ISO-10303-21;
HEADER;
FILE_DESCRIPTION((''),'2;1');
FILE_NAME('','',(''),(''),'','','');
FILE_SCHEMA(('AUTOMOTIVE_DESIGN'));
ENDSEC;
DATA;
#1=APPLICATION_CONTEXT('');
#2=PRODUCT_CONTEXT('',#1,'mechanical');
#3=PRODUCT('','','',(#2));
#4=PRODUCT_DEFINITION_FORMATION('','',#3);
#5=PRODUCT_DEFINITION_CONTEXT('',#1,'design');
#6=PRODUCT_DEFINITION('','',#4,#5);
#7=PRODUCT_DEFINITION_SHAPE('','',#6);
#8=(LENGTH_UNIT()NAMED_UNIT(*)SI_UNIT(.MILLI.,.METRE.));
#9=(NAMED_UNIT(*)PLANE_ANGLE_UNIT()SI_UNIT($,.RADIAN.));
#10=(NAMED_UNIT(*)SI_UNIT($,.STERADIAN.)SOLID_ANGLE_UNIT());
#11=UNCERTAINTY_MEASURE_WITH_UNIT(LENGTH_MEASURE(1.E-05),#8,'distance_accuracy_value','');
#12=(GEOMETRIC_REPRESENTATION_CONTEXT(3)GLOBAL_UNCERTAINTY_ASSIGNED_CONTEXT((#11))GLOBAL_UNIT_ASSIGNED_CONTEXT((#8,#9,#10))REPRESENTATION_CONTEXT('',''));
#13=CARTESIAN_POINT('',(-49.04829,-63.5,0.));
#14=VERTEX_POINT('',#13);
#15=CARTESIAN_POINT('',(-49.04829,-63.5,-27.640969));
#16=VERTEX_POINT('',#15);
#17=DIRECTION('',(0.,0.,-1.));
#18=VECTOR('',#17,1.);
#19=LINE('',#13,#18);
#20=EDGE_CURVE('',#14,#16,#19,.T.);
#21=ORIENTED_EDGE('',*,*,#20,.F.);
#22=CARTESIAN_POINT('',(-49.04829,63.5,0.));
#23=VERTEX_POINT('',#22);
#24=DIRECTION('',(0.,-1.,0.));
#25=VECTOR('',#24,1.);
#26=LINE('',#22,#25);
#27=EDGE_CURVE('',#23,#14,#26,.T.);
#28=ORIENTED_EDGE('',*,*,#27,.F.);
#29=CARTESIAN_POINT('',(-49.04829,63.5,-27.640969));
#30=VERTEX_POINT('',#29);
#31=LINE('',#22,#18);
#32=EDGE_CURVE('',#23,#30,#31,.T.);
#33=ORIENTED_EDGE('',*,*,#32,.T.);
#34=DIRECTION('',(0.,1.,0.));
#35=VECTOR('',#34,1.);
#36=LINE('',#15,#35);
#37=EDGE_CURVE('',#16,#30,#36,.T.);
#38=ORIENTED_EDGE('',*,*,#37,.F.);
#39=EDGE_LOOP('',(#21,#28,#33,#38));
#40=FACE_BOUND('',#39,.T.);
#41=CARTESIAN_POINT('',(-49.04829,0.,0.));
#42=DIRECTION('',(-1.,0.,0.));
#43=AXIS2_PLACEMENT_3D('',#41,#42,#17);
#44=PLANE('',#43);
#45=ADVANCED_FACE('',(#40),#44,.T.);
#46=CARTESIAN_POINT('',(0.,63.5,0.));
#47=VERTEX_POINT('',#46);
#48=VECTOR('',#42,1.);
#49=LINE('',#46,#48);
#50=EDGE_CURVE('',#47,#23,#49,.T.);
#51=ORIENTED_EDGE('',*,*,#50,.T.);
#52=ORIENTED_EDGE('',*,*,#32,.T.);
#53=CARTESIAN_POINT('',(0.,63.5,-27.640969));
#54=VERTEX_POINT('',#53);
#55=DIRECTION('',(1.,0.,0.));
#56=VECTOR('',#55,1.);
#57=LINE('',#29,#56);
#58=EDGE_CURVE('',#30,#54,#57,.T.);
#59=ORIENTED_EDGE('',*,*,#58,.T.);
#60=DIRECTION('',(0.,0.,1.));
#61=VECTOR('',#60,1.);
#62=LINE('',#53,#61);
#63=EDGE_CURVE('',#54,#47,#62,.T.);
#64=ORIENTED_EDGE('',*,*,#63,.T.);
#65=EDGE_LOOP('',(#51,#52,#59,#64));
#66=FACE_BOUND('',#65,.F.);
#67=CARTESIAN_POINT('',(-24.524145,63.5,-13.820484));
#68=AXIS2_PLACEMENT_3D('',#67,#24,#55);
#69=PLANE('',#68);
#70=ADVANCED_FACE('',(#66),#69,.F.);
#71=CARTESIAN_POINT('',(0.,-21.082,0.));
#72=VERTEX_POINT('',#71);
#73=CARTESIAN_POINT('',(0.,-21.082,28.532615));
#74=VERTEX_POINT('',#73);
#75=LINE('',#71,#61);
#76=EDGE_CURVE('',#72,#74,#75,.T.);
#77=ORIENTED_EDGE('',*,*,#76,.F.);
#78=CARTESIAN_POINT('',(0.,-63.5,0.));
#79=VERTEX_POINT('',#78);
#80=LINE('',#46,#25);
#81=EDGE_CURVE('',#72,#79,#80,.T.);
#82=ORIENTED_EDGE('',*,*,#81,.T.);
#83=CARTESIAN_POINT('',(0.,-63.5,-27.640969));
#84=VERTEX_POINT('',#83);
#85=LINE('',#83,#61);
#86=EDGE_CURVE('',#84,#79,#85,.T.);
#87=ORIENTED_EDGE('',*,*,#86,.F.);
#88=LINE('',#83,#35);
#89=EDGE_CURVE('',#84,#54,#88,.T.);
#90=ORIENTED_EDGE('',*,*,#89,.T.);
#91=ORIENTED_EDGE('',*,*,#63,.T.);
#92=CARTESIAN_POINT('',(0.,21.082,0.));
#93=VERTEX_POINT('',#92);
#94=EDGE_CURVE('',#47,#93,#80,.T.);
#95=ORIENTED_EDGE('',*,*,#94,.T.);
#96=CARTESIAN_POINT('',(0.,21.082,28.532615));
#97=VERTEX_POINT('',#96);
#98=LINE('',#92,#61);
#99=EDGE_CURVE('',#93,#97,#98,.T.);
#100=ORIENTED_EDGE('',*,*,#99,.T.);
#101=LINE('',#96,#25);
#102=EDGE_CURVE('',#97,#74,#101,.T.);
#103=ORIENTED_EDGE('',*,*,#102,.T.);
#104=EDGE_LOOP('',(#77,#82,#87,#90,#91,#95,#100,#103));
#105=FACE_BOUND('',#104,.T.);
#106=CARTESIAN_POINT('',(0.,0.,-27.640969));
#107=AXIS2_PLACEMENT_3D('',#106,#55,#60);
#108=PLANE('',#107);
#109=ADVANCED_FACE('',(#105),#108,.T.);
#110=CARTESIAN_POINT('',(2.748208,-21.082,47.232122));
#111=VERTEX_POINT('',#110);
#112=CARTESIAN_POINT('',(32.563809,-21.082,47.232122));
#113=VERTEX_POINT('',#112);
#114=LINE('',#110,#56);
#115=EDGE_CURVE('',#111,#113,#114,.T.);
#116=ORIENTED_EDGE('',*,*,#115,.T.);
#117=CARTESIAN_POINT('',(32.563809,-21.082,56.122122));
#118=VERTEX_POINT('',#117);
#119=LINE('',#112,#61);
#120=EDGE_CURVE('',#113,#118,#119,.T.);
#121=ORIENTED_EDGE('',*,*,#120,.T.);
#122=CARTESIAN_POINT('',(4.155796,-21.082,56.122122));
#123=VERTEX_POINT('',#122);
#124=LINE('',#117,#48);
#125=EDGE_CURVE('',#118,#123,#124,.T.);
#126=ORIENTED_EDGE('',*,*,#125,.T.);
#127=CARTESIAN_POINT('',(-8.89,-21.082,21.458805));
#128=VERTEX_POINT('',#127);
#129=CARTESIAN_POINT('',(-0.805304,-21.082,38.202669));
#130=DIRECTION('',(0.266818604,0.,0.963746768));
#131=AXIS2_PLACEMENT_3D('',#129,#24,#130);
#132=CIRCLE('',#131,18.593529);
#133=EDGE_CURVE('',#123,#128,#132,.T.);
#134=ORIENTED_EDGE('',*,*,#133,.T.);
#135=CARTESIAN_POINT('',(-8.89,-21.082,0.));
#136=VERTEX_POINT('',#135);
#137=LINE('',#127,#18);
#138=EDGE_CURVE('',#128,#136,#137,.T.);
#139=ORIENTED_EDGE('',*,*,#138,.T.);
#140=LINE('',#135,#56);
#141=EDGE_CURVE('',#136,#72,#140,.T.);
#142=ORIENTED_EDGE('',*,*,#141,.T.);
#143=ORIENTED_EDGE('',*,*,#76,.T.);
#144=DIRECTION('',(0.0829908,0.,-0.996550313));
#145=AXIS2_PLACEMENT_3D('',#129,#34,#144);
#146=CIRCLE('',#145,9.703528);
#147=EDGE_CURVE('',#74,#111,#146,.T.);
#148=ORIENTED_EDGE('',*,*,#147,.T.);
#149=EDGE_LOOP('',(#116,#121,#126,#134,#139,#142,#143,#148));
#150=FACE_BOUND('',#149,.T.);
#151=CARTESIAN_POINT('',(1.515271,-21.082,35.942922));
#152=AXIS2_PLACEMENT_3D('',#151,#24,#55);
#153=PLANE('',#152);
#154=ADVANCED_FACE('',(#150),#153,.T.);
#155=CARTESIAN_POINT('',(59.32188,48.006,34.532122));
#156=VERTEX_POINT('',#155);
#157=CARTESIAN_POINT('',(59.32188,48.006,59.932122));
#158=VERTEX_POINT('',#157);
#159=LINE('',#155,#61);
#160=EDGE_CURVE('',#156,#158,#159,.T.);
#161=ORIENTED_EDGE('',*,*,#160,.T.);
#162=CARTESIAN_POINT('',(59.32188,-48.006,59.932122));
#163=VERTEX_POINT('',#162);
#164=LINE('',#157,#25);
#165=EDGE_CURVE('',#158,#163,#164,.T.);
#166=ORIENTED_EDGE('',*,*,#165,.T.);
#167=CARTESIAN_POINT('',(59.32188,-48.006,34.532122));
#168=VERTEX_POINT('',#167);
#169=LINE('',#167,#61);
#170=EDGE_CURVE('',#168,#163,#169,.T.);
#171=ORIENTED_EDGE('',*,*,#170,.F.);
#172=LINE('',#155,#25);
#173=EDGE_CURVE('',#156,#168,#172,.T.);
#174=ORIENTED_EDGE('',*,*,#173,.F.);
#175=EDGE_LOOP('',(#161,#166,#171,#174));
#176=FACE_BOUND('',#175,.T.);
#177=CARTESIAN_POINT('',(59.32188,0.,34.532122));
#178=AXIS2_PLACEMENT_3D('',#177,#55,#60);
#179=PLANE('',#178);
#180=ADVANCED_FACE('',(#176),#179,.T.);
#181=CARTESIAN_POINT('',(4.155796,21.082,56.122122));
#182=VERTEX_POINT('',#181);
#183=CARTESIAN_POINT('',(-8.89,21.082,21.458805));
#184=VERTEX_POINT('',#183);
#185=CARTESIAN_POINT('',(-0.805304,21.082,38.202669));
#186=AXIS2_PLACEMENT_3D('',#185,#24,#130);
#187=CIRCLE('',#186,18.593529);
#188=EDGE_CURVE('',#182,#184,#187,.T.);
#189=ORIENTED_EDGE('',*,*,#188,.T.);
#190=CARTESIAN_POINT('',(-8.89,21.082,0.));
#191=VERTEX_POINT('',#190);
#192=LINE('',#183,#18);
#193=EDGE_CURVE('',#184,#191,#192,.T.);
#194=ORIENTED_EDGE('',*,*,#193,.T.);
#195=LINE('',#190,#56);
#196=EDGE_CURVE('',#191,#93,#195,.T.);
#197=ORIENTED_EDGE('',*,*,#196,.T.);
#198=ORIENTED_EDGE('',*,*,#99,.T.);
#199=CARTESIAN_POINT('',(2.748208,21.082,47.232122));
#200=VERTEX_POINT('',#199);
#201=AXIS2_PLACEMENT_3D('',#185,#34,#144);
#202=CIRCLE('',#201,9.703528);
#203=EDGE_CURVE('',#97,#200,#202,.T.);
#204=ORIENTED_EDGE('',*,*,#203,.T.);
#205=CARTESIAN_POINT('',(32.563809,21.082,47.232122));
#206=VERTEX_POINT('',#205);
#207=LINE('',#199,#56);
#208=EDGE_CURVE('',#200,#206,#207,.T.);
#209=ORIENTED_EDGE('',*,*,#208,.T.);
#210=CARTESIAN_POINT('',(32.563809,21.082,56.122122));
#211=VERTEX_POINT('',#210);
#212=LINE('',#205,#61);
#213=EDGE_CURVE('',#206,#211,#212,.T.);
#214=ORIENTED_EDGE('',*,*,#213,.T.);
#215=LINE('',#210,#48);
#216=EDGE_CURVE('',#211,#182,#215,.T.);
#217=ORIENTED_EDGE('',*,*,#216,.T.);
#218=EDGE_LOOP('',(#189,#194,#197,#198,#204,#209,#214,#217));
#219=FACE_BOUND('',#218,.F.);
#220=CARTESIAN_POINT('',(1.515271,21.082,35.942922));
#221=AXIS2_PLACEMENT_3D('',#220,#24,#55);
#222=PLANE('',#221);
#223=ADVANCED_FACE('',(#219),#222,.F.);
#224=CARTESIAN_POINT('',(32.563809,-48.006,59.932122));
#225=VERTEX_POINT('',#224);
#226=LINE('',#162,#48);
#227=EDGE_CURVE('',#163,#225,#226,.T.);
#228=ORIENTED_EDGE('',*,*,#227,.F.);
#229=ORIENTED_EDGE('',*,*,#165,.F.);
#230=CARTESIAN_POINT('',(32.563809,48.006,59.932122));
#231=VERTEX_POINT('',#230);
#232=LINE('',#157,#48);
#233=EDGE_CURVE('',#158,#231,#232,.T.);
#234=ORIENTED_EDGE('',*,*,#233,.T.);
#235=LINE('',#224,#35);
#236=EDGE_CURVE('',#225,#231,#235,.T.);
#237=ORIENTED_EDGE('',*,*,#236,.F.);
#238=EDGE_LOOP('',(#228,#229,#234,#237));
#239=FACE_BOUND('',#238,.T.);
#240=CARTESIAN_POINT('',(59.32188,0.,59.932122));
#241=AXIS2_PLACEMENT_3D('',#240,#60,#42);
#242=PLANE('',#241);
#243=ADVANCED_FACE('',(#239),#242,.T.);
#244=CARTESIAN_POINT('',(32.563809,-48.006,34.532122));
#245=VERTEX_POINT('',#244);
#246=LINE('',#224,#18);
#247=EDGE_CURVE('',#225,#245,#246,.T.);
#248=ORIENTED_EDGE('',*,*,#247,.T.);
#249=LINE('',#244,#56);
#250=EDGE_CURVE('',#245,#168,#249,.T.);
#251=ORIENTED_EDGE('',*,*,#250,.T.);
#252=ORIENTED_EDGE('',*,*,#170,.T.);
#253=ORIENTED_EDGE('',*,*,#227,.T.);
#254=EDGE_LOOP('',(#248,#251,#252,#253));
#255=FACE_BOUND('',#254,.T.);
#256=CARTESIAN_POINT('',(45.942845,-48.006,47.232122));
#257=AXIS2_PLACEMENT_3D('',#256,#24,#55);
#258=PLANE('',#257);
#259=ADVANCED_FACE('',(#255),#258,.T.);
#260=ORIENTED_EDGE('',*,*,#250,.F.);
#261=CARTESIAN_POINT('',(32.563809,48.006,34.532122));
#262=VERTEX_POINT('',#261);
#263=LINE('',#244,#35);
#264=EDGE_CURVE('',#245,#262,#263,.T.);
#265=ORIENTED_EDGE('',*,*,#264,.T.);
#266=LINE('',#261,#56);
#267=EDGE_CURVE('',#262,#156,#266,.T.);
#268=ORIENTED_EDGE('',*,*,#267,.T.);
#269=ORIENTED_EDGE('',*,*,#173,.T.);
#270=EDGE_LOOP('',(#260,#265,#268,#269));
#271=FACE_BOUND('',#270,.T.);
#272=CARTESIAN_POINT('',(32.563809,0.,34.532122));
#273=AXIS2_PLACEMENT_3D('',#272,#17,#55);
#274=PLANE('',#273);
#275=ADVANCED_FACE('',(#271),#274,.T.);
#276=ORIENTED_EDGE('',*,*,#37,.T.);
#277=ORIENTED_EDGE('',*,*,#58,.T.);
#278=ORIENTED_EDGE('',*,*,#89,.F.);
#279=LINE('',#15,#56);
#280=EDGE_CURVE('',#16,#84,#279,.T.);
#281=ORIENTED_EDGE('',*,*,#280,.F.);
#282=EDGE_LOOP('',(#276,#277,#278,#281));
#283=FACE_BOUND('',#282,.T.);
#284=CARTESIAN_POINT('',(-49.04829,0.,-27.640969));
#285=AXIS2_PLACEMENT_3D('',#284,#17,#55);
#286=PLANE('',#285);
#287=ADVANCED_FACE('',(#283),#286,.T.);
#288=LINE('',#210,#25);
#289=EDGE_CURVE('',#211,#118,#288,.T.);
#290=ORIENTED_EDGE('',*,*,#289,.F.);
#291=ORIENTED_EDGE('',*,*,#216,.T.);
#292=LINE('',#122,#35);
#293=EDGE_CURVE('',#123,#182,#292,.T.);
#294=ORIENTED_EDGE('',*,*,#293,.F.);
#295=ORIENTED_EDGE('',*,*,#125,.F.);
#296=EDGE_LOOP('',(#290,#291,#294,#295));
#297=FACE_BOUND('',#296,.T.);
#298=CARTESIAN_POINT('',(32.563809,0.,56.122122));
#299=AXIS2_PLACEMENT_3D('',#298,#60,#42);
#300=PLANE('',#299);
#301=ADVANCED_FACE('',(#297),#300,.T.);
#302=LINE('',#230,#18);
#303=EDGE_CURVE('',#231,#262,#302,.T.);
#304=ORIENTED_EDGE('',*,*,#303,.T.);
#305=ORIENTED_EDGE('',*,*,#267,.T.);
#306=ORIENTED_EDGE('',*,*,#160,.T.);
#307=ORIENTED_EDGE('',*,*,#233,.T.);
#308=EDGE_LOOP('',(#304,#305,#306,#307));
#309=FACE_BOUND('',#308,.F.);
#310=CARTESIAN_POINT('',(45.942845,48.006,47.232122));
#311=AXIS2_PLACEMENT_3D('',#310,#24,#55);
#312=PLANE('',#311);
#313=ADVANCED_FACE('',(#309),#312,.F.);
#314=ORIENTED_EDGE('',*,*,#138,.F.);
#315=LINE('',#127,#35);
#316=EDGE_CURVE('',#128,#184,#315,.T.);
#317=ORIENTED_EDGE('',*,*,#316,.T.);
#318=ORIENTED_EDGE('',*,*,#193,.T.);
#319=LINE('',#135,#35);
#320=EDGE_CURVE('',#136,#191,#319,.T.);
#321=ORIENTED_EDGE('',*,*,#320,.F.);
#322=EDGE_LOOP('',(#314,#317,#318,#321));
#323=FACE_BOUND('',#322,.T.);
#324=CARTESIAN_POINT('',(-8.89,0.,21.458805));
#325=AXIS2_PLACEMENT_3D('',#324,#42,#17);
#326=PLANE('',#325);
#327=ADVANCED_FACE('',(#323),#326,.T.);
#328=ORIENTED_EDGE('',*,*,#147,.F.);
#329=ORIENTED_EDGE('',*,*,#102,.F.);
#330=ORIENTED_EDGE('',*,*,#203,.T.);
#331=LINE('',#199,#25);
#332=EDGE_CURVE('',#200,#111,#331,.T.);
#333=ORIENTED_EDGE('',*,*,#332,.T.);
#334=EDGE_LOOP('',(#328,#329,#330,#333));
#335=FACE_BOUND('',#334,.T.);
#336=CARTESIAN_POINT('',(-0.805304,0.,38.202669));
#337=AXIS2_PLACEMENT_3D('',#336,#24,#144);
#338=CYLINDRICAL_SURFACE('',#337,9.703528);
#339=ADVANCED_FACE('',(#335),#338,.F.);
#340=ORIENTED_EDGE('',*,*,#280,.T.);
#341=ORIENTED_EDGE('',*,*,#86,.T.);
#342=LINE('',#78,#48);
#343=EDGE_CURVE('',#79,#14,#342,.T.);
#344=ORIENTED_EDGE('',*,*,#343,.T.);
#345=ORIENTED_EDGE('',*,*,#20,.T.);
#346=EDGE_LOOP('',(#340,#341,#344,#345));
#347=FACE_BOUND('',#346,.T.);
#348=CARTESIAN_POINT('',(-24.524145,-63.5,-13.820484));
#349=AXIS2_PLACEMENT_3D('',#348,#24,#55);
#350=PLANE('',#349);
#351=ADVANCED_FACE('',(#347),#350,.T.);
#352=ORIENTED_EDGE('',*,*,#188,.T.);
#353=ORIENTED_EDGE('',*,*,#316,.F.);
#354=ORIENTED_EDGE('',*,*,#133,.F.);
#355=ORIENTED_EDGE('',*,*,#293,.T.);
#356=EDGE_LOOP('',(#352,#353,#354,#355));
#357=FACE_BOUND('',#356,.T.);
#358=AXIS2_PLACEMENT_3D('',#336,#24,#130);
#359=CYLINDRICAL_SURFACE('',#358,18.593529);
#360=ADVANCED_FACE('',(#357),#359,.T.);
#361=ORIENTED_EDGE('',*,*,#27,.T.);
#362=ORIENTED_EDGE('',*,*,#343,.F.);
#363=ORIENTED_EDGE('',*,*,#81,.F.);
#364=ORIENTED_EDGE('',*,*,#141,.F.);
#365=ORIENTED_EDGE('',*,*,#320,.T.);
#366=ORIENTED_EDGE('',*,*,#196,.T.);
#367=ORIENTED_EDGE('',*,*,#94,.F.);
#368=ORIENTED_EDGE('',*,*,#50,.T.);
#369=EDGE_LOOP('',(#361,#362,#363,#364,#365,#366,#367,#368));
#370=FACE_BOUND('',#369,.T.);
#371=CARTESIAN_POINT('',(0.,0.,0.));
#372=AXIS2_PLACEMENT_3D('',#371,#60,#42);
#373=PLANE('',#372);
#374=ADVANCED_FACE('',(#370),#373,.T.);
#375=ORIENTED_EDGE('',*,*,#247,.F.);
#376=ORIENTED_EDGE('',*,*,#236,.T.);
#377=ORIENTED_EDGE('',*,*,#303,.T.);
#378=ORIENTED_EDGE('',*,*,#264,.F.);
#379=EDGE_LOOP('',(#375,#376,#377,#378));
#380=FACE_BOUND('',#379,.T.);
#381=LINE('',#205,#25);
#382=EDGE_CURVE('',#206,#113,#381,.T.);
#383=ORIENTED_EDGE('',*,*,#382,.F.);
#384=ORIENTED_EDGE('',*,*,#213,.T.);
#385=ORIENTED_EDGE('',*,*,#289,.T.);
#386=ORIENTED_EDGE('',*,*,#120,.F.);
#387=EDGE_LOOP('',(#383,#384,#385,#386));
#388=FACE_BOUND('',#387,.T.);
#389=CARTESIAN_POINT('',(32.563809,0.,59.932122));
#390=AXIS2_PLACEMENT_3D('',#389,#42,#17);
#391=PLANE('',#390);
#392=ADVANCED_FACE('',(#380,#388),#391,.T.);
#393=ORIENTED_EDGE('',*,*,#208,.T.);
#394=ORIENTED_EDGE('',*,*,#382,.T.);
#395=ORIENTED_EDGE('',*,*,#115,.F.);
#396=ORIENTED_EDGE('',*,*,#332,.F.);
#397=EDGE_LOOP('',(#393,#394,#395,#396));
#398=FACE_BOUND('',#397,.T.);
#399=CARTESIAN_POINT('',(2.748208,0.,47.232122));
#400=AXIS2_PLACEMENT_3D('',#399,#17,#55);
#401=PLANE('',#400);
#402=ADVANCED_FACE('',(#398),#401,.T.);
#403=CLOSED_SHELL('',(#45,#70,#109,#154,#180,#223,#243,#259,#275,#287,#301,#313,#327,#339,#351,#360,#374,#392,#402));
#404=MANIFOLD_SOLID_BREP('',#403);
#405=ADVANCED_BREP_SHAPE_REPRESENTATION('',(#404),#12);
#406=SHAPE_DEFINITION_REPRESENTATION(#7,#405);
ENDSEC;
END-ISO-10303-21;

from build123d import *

# Parameters (mm, degrees)
F1_DEPTH = 63.5
F2_DEPTH = 21.082
F3_DEPTH = 48.006


# Not quite as in the source:
# - a feature of the source that left no trace in its solid (it failed there, or was rolled back) is left out


with BuildPart() as f1:
    # F0 (on Front) → F1 (new body, symmetric)
    with BuildSketch(Plane.XZ):
        Polygon((0, -27.6409685612), (0, 0), (-8.890000172, 0), (-49.0482896566, 0), (-49.0482896566, -27.6409685612), align=None)
    extrude(amount=F1_DEPTH, both=True)

    # F0 (on Front) → F2 (join, symmetric)
    with BuildSketch(Plane.XZ):
        with BuildLine():
            Line((-8.890000172, 0), (0, 0))
            Line((0, 0), (0, 28.5326149315))
            ThreePointArc((0, 28.5326149315), (-10.4057051367, 39.6136101279), (2.7482079064, 47.2321221605))
            Line((2.7482079064, 47.2321221605), (32.5638093054, 47.2321221605))
            Line((32.5638093054, 47.2321221605), (32.5638093054, 56.1221223325))
            Line((32.5638093054, 56.1221223325), (4.1557957579, 56.1221223325))
            ThreePointArc((4.1557957579, 56.1221223325), (-18.2071887125, 44.7519974591), (-8.890000172, 21.4588050682))
            Line((-8.890000172, 21.4588050682), (-8.890000172, 0))
        make_face()
    extrude(amount=F2_DEPTH, both=True)

    # F0 (on Front) → F3 (join, symmetric)
    with BuildSketch(Plane.XZ):
        Polygon((32.5638093054, 56.1221223325), (32.5638093054, 47.2321221605), (32.5638093054, 34.5321221605), (59.3218803406, 34.5321221605), (59.3218803406, 59.9321221605), (32.5638093054, 59.9321221605), align=None)
    extrude(amount=F3_DEPTH, both=True)


solid = f1.part
